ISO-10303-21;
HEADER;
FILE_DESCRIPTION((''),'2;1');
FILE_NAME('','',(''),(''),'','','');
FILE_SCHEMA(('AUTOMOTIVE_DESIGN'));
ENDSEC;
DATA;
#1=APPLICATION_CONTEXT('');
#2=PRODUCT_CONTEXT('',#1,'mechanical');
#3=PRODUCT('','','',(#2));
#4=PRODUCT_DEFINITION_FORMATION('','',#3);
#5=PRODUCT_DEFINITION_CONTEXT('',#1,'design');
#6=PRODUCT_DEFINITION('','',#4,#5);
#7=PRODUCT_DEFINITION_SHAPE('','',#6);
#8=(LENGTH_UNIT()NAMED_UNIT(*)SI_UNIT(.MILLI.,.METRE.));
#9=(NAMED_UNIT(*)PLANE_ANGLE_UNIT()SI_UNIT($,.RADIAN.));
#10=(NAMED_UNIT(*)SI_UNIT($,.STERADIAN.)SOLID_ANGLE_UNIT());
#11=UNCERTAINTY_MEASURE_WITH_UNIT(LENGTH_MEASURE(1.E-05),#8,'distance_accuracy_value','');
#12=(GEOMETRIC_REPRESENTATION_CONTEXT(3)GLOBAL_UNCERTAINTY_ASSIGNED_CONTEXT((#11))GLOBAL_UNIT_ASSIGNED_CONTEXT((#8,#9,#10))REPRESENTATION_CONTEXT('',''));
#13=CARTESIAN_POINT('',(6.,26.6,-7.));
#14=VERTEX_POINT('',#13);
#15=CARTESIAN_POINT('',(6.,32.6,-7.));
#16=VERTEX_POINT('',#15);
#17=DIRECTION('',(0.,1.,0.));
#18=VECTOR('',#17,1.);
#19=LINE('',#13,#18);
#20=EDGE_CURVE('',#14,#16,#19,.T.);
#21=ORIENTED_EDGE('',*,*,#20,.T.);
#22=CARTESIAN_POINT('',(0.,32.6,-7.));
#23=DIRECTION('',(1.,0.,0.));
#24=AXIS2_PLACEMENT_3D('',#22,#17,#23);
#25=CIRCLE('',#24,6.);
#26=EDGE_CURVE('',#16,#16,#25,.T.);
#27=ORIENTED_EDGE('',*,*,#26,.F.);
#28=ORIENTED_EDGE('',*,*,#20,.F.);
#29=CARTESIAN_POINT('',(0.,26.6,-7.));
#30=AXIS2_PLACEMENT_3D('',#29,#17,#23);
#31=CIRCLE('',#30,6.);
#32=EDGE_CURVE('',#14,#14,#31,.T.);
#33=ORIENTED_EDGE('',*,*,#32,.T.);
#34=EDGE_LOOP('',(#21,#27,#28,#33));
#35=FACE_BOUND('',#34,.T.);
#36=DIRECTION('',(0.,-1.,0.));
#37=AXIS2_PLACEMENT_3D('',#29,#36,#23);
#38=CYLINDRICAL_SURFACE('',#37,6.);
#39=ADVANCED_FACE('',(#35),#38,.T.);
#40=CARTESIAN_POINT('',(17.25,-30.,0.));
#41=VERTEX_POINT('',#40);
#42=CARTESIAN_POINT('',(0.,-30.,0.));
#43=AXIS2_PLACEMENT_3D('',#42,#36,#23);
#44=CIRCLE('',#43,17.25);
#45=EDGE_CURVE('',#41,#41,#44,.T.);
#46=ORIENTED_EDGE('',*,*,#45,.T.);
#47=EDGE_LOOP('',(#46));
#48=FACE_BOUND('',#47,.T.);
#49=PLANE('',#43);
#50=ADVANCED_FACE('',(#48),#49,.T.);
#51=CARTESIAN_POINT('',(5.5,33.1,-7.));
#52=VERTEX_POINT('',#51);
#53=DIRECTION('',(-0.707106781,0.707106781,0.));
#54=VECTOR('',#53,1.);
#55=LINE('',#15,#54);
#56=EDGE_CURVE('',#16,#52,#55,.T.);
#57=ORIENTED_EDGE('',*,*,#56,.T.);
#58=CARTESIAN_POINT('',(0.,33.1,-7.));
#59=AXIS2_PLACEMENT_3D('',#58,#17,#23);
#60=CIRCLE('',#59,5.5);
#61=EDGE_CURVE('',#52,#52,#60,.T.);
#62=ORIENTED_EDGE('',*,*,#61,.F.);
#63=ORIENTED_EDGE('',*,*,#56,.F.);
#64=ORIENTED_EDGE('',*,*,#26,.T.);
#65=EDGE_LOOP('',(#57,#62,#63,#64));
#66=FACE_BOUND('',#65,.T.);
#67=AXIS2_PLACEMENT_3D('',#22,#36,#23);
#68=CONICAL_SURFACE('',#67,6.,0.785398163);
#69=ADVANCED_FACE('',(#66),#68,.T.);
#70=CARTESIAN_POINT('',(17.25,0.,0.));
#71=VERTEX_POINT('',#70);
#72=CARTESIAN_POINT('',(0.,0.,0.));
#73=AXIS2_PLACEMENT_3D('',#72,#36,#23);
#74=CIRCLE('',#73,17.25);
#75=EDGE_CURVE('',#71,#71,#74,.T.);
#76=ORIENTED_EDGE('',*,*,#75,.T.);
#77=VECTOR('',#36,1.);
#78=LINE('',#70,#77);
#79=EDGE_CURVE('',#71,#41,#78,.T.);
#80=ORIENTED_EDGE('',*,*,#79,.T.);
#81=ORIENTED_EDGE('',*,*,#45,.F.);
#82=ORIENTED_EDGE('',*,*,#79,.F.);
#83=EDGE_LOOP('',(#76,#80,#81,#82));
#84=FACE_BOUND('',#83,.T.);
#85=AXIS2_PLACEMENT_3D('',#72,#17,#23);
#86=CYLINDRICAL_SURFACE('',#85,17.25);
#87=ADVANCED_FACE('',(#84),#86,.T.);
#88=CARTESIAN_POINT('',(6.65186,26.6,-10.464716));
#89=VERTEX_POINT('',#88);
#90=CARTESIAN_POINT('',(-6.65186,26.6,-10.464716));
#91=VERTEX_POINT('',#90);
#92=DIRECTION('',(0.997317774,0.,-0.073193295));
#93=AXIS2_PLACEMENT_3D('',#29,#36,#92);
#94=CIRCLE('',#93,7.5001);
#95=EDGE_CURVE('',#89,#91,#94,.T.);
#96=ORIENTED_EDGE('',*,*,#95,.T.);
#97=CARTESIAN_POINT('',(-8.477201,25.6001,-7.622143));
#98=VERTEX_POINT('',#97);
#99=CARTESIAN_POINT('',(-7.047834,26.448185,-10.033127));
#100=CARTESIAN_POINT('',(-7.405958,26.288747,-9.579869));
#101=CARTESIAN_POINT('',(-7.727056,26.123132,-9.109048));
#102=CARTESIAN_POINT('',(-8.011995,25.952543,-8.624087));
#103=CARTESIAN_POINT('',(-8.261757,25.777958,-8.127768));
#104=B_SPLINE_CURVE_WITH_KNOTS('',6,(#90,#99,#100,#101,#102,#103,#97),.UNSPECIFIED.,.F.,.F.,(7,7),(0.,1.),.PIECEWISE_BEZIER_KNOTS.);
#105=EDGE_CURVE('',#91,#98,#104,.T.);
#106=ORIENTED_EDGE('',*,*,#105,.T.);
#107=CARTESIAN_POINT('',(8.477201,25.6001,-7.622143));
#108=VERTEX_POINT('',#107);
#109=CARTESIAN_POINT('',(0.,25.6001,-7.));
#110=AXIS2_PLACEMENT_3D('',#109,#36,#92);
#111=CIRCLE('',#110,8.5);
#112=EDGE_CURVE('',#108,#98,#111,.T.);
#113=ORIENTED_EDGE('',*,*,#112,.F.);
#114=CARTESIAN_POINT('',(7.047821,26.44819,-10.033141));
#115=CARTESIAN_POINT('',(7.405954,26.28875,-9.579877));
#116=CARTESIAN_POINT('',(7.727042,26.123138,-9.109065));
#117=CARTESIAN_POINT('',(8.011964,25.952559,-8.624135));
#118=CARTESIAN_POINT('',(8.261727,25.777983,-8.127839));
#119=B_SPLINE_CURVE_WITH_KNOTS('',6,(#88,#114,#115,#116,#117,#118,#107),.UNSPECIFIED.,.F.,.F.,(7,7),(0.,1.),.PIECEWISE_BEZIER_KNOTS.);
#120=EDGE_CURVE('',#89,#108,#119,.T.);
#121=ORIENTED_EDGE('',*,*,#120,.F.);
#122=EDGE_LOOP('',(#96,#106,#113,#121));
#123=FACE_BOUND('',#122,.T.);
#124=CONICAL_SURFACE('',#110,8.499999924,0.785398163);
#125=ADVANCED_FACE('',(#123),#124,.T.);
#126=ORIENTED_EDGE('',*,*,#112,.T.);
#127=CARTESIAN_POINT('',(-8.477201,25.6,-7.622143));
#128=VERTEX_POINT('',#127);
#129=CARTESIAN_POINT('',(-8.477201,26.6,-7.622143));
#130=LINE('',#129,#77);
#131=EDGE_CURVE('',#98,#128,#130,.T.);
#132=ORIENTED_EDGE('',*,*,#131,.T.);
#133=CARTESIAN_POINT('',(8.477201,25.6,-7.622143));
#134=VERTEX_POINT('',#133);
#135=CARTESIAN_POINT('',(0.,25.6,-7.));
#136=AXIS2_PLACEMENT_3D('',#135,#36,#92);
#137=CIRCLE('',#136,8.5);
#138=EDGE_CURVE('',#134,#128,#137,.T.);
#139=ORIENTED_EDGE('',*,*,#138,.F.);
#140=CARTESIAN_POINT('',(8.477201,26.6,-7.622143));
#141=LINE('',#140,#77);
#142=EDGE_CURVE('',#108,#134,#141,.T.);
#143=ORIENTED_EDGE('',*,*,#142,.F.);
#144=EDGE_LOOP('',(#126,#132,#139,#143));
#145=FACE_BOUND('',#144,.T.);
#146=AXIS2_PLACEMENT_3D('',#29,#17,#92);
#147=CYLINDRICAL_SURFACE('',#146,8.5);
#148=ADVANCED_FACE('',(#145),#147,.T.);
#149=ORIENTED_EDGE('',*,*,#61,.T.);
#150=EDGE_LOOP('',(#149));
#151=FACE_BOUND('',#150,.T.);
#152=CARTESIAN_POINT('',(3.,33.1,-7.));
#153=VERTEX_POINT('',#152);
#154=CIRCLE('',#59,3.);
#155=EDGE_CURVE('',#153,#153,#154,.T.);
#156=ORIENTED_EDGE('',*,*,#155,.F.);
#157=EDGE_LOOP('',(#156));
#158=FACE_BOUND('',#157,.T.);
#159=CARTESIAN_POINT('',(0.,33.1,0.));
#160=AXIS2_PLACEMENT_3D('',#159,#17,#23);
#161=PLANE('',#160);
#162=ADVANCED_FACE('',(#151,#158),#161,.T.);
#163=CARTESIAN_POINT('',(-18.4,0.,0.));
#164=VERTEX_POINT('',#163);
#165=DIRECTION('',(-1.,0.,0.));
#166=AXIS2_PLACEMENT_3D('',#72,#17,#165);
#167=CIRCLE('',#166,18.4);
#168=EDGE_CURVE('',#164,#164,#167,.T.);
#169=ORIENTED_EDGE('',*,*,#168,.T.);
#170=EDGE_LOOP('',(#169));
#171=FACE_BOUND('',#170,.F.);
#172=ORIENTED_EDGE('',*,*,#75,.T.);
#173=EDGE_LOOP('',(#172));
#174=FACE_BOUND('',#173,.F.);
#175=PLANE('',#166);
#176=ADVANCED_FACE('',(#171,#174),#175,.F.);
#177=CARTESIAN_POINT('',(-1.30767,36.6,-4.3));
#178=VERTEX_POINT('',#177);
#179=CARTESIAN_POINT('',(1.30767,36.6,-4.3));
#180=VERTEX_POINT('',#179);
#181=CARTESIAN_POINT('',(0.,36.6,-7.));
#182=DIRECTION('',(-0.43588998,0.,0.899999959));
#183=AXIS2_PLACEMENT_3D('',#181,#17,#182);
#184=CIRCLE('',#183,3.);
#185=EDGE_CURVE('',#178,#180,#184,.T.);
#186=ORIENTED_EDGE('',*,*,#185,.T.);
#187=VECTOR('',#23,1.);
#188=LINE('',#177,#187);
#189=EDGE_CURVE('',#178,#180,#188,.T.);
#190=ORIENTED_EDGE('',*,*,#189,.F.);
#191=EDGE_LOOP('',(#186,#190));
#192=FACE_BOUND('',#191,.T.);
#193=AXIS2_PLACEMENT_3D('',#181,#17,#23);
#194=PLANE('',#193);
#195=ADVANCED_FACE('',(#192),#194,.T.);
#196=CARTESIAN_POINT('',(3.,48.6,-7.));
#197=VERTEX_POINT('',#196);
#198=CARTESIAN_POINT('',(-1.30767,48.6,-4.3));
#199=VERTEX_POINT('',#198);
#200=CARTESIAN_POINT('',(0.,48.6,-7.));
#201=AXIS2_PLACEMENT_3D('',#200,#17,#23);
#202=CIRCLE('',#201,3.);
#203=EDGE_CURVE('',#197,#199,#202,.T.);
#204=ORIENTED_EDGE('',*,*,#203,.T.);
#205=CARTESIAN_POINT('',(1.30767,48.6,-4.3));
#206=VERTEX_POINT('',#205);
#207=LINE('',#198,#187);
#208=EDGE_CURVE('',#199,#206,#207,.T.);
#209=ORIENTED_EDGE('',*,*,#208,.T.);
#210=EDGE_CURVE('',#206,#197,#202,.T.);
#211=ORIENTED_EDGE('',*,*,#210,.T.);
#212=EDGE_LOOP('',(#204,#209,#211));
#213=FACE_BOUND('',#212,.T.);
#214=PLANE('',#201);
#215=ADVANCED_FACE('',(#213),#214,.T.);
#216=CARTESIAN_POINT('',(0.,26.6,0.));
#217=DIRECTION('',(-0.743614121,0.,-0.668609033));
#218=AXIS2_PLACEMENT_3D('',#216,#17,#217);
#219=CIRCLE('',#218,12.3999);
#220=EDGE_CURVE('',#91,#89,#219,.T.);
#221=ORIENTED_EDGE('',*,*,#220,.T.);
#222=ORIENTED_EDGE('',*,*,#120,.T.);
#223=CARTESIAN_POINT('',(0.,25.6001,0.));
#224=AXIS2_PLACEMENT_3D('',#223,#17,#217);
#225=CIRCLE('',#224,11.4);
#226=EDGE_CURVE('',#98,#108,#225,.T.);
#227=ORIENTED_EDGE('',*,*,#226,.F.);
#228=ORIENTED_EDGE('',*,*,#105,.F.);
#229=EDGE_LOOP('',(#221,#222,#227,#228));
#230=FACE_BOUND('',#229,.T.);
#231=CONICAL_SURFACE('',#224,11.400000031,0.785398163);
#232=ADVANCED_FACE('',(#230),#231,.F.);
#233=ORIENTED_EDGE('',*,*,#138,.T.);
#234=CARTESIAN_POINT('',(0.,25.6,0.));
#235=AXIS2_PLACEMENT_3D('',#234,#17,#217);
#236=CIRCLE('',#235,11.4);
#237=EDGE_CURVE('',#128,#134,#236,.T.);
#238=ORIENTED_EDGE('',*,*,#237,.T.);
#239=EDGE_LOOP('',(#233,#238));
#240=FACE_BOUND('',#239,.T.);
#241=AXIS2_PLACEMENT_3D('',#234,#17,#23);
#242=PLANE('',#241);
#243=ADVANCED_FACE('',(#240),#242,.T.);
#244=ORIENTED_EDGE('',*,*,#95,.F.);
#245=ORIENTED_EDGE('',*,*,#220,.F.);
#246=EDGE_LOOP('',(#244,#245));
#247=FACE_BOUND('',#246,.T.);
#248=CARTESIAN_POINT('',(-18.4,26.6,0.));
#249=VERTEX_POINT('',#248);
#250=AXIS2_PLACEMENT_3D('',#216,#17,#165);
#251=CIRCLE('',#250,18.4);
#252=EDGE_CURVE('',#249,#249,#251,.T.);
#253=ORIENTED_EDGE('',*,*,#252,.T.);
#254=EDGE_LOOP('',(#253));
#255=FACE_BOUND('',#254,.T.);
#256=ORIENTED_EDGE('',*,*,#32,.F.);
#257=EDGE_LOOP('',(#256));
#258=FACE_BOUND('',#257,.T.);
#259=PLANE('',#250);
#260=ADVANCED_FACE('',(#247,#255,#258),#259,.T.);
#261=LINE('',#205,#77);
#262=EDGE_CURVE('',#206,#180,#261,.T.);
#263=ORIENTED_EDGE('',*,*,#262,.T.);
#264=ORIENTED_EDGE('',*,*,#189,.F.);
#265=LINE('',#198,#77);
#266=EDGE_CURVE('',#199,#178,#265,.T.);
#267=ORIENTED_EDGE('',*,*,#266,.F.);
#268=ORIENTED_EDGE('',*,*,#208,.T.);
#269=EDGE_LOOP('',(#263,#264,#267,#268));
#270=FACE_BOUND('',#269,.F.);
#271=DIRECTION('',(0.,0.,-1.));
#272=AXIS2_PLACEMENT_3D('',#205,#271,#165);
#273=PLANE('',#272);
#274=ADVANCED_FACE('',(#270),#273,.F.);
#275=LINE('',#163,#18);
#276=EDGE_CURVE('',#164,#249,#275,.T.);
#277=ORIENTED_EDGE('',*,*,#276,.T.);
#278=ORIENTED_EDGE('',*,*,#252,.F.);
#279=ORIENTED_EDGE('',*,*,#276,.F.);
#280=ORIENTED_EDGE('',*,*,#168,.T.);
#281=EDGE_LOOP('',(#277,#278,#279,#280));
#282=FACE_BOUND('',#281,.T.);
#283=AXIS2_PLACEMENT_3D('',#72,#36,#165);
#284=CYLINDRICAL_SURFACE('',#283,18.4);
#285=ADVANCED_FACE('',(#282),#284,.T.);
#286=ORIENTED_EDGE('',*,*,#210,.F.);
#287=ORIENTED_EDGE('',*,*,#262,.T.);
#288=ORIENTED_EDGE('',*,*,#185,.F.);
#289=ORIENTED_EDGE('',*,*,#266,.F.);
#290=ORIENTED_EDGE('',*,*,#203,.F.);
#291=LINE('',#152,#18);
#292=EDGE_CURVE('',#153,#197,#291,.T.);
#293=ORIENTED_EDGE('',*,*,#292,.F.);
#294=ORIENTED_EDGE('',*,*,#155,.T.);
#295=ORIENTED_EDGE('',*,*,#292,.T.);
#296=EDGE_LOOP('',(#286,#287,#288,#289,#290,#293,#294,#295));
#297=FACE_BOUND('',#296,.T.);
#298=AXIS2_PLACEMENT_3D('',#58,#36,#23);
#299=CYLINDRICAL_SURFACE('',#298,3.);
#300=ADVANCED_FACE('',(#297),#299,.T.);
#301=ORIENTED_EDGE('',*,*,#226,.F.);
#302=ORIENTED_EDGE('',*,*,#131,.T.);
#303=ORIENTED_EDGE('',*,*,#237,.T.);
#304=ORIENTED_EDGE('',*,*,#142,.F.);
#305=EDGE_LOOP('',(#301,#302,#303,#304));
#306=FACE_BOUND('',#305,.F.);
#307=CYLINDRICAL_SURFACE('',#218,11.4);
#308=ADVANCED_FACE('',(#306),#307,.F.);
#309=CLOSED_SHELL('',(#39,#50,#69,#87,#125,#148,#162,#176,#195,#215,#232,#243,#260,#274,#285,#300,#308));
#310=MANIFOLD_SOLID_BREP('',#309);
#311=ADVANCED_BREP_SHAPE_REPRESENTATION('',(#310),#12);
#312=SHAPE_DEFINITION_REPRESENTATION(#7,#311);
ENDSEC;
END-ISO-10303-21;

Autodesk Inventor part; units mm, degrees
ref_plane "YZ Plane" through (0, 0, 0) normal (1, 0, 0) x (0, 1, 0)
ref_plane "XZ Plane" through (0, 0, 0) normal (0, 1, 0) x (-1, 0, 0)
ref_plane "XY Plane" through (0, 0, 0) normal (0, 0, 1) x (1, 0, 0)
sketch "Sketch1" plane through (0, 0, 0) normal (0, 1, 0) x (-1, 0, 0)
  circle A0 centre (0, 0) radius 18.4
  dimension "d0" = 36.8
sketch "Sketch1 outline for Extrusion1" plane through (0, 0, 0) normal (0, 1, 0) x (-1, 0, 0)
  circle A0 centre (0, 0) radius 18.4
extrude "Extrusion1" add sketch "Sketch1 outline for Extrusion1" along normal blind 26.6
sketch "Sketch2" plane through (0, 26.6, 0) normal (0, 1, 0) x (1, 0, 0)
  circle A0 centre (0, 7) radius 6
  point P0 (0, 0)
  dimension "d5" = 0
  dimension "d6" = 7
  dimension "d7" = 12
sketch "Sketch2 outline for Extrusion2" plane through (0, 26.6, 0) normal (0, 1, 0) x (1, 0, 0)
  circle A0 centre (0, 7) radius 6
extrude "Extrusion2" add sketch "Sketch2 outline for Extrusion2" along normal blind 6.5
chamfer "Chamfer1" distance 0.5 angle 45 1 edges at (-6, 33.1, -7)
sketch "Sketch3" plane through (0, 26.6, 0) normal (0, 1, 0) x (1, 0, 0)
  circle A0 centre (0, 0) radius 18.4
  circle A1 centre (0, 0) radius 18.4
  arc A2 (-8.477201, 7.622143) -> (8.477201, 7.622143) centre (0, 7) ccw
  arc A3 (-8.477201, 7.622143) -> (8.477201, 7.622143) centre (0, 0) ccw
  dimension "d13" = 0
  dimension "d14" = 7
  dimension "d15" = 17
  dimension "d16" = 22.8
sketch "Sketch3 outline for Extrusion3" plane through (0, 26.6, 0) normal (0, 1, 0) x (1, 0, 0)
  arc A0 (-8.477201, 7.622143) -> (8.477201, 7.622143) centre (0, 0) ccw
  arc A1 (8.477201, 7.622143) -> (-8.477201, 7.622143) centre (0, 7) cw
extrude "Extrusion3" cut sketch "Sketch3 outline for Extrusion3" against normal blind 1
chamfer "Chamfer3" distance 1 angle 45 2 edges at (0, 26.6, 11.4) (0, 26.6, 1.5)
sketch "Sketch4" plane through (0, 33.1, -7) normal (0, 1, 0) x (1, 0, 0)
  circle A0 centre (0, 0) radius 3
  circle A1 centre (0, 0) radius 6 projected
  point P0 (0, -7)
  dimension "d25" = 6
sketch "Sketch4 outline for Extrusion4" plane through (0, 33.1, -7) normal (0, 1, 0) x (1, 0, 0)
  circle A0 centre (0, 0) radius 3
extrude "Extrusion4" add sketch "Sketch4 outline for Extrusion4" along normal blind 15.5
sketch "Sketch5" plane through (0, 48.6, -7) normal (0, 1, 0) x (1, 0, 0)
  line L0 (0, -2.7) -> (-1.30767, -2.7)
  line L1 (0, -2.7) -> (1.30767, -2.7)
  circle A0 centre (0, 0) radius 3
  arc A1 (-1.30767, -2.7) -> (1.30767, -2.7) centre (0, 0) ccw
  point P0 (0, -7)
  dimension "d33" = 4.3
sketch "Sketch5 outline for Extrusion5" plane through (0, 48.6, -7) normal (0, 1, 0) x (1, 0, 0)
  line L0 (1.30767, -2.7) -> (0, -2.7)
  arc A0 (-1.30767, -2.7) -> (1.30767, -2.7) centre (0, 0) ccw
  line L1 (0, -2.7) -> (-1.30767, -2.7)
extrude "Extrusion5" cut sketch "Sketch5 outline for Extrusion5" against normal blind 12
sketch "Sketch6" plane through (0, 0, 0) normal (0, -1, 0) x (1, 0, 0)
  circle A0 centre (0, 0) radius 17.25
  dimension "d36" = 34.5
sketch "Sketch6 outline for Extrusion6" plane through (0, 0, 0) normal (0, -1, 0) x (1, 0, 0)
  circle A0 centre (0, 0) radius 17.25
extrude "Extrusion6" add sketch "Sketch6 outline for Extrusion6" along normal blind 30
properties part number "37D mm metal gearmotor"
